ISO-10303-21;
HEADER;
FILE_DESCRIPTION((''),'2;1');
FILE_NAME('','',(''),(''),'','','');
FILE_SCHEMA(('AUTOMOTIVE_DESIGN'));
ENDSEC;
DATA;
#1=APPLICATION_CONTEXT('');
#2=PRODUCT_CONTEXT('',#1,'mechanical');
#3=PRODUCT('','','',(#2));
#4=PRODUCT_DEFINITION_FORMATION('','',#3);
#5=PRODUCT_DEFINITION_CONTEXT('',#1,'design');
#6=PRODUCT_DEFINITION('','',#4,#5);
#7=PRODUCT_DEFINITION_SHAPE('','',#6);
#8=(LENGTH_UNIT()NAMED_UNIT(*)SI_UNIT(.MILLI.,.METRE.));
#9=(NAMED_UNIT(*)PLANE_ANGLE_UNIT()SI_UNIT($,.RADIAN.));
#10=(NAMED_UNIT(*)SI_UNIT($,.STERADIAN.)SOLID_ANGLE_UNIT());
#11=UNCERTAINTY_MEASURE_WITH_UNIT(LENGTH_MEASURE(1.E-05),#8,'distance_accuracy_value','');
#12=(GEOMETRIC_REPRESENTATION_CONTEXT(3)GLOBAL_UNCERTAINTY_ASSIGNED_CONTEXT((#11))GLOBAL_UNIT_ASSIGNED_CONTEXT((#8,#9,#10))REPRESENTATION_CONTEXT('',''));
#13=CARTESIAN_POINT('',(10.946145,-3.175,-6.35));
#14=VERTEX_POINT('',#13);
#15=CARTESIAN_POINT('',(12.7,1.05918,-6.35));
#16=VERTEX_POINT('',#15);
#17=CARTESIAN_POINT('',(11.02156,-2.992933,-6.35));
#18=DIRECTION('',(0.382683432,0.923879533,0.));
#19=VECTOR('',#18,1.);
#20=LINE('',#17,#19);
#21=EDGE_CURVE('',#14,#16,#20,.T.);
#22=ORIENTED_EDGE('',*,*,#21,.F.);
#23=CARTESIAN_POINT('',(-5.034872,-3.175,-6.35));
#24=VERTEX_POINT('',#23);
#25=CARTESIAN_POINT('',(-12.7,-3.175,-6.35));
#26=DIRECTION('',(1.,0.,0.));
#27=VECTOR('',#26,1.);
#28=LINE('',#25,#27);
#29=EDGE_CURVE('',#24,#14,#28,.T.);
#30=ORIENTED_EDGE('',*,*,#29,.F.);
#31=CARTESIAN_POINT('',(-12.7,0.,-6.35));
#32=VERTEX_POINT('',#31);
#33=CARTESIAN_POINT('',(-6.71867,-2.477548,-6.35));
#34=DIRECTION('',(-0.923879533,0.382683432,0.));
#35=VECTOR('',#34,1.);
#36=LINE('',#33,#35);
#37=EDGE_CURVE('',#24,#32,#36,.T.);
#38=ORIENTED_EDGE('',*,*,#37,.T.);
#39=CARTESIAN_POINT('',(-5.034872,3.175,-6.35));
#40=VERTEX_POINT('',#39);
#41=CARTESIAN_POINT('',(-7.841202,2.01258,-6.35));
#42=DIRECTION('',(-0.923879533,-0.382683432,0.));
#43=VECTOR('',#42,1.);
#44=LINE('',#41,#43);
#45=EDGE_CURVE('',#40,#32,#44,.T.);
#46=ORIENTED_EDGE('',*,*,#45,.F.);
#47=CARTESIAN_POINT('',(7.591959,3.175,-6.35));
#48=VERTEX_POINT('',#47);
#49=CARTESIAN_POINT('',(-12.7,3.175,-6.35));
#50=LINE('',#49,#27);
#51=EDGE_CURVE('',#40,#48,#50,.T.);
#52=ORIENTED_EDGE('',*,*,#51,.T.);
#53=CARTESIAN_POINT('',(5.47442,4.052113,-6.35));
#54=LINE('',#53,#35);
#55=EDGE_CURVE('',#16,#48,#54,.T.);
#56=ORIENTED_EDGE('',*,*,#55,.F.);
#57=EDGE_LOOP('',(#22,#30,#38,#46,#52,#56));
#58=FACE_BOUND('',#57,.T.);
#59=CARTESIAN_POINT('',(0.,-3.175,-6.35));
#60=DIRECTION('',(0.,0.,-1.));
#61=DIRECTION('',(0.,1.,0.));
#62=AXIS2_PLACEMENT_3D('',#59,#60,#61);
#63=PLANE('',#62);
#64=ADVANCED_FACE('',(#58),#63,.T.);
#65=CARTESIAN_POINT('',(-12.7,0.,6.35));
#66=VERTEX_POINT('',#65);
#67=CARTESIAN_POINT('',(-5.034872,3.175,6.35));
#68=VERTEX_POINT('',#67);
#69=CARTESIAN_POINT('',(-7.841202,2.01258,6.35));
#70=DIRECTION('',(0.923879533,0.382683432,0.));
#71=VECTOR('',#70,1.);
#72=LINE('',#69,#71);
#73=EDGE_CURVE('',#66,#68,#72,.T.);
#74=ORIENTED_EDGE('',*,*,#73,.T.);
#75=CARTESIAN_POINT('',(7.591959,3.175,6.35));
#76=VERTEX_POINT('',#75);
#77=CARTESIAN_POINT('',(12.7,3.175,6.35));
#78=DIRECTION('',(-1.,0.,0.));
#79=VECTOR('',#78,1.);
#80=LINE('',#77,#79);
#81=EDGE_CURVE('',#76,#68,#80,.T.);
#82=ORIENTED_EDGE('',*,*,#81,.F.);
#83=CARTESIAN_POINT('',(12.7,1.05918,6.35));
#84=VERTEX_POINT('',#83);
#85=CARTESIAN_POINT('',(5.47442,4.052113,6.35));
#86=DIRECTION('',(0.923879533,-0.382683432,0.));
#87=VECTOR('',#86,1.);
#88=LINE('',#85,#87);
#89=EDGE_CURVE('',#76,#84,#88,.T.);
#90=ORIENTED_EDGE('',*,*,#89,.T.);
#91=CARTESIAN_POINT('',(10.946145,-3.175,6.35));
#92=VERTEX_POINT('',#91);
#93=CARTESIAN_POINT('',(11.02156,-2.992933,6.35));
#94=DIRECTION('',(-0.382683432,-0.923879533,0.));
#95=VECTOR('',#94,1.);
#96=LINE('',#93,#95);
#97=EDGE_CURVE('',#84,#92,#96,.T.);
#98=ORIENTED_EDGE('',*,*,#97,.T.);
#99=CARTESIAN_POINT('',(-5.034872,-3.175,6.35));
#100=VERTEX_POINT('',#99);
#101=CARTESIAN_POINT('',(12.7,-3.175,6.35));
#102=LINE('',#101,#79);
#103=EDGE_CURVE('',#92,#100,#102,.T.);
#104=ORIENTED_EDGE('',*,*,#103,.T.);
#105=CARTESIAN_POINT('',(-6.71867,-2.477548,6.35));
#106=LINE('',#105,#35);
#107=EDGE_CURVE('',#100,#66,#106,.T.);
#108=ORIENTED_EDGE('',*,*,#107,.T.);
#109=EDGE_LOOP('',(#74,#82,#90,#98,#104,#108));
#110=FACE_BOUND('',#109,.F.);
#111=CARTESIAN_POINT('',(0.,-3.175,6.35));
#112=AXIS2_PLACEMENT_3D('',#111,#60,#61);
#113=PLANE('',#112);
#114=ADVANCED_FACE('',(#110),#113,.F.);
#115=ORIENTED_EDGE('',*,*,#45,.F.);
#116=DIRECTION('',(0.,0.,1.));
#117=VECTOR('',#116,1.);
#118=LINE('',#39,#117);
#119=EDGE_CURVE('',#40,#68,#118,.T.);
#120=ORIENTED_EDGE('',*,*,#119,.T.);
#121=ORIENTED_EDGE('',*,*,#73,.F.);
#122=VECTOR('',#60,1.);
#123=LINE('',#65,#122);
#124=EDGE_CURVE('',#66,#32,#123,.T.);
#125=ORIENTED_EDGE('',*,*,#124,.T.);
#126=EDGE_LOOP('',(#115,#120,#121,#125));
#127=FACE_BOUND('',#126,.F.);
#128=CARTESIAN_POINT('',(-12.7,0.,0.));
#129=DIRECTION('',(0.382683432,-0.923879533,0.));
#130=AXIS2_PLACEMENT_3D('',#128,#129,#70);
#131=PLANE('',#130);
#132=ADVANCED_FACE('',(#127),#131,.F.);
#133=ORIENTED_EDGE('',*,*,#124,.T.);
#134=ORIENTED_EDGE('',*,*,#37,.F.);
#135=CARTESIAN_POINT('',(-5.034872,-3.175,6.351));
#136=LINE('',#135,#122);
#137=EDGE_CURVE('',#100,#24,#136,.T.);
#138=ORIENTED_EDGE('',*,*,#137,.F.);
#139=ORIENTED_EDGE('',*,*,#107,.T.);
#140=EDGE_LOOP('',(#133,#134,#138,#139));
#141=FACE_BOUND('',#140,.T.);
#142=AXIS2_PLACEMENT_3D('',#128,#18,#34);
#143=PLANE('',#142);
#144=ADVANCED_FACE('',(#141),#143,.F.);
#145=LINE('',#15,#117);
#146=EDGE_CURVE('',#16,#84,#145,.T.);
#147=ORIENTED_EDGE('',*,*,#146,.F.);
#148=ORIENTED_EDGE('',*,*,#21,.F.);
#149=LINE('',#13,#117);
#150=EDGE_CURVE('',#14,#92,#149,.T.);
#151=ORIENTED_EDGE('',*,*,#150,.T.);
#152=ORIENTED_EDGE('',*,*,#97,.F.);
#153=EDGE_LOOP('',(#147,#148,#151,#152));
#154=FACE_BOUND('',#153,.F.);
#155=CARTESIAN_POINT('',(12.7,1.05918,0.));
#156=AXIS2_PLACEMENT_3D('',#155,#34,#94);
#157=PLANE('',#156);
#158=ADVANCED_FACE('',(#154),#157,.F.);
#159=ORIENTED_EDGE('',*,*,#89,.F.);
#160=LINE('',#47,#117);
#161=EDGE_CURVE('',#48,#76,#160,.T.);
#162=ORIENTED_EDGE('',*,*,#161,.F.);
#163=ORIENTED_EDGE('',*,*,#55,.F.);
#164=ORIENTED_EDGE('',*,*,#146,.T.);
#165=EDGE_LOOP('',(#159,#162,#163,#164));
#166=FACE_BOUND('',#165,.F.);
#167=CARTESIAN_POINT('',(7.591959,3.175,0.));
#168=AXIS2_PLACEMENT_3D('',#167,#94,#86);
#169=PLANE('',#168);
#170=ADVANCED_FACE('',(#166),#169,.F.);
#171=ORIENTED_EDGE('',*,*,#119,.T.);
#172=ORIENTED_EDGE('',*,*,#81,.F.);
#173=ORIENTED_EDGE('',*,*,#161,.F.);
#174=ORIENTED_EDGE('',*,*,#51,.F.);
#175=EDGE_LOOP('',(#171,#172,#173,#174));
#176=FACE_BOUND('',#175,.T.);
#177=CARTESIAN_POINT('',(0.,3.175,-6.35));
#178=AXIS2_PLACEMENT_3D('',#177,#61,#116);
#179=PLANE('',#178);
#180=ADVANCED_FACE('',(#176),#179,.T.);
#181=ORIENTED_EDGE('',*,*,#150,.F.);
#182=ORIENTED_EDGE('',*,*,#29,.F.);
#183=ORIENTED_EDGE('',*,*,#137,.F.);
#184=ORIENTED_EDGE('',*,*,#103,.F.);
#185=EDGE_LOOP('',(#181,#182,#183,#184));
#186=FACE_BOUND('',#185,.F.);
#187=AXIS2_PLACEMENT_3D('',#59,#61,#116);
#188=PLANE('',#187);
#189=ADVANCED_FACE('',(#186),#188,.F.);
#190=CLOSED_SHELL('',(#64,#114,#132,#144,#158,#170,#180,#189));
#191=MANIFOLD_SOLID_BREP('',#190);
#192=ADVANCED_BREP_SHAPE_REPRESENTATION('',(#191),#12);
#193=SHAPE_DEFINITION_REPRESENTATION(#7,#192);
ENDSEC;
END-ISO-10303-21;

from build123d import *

# Parameters (mm, degrees)
F0_W          = 6.35
F0_H          = 12.7
F1_DEPTH      = 12.7
F3_DEPTH      = 6.351
F3_DEPTH_BACK = 6.351
F5_DEPTH      = 6.351
F5_DEPTH_BACK = 6.351
F7_DEPTH      = 6.351
F7_DEPTH_BACK = 6.351


# Not quite as in the source:
# - a pattern or mirror of a feature is missing from the dataset's text; its kind, count and spacing are read off the source's solid


with BuildPart() as f1:
    # F0 (on Right) → F1 (new body, symmetric)
    with BuildSketch(Plane.YZ):
        Rectangle(F0_W, F0_H)
    extrude(amount=F1_DEPTH, both=True)

    # F2 (on Top) → F3 (cut, two sides)
    with BuildSketch(Plane.XY) as f3_sk:
        Polygon((-12.7, 3.175), (-12.7, 0), (-5.0348719395, 3.175), align=None)
    f3 = extrude(amount=-F3_DEPTH, mode=Mode.SUBTRACT) + extrude(f3_sk.sketch, amount=F3_DEPTH_BACK, mode=Mode.SUBTRACT)

    # F3_copies: F3 across plane
    add(f3.mirror(Plane(origin=(0, 0, 0), x_dir=(0, 0, -1), z_dir=(0, -1, 0))), mode=Mode.SUBTRACT)

    # F4 (on Top) → F5 (cut, two sides)
    with BuildSketch(Plane.XY) as f5_sk:
        Polygon((17.9670583457, 3.175), (7.5919586605, 3.175), (12.7, 1.05918), align=None)
    extrude(amount=-F5_DEPTH, mode=Mode.SUBTRACT)
    extrude(f5_sk.sketch, amount=F5_DEPTH_BACK, mode=Mode.SUBTRACT)

    # F6 (on Top) → F7 (cut, two sides)
    with BuildSketch(Plane.XY) as f7_sk:
        Polygon((12.7, 1.05918), (10.9461452185, -3.175), (12.7, -3.175), align=None)
    extrude(amount=-F7_DEPTH, mode=Mode.SUBTRACT)
    extrude(f7_sk.sketch, amount=F7_DEPTH_BACK, mode=Mode.SUBTRACT)


solid = f1.part
